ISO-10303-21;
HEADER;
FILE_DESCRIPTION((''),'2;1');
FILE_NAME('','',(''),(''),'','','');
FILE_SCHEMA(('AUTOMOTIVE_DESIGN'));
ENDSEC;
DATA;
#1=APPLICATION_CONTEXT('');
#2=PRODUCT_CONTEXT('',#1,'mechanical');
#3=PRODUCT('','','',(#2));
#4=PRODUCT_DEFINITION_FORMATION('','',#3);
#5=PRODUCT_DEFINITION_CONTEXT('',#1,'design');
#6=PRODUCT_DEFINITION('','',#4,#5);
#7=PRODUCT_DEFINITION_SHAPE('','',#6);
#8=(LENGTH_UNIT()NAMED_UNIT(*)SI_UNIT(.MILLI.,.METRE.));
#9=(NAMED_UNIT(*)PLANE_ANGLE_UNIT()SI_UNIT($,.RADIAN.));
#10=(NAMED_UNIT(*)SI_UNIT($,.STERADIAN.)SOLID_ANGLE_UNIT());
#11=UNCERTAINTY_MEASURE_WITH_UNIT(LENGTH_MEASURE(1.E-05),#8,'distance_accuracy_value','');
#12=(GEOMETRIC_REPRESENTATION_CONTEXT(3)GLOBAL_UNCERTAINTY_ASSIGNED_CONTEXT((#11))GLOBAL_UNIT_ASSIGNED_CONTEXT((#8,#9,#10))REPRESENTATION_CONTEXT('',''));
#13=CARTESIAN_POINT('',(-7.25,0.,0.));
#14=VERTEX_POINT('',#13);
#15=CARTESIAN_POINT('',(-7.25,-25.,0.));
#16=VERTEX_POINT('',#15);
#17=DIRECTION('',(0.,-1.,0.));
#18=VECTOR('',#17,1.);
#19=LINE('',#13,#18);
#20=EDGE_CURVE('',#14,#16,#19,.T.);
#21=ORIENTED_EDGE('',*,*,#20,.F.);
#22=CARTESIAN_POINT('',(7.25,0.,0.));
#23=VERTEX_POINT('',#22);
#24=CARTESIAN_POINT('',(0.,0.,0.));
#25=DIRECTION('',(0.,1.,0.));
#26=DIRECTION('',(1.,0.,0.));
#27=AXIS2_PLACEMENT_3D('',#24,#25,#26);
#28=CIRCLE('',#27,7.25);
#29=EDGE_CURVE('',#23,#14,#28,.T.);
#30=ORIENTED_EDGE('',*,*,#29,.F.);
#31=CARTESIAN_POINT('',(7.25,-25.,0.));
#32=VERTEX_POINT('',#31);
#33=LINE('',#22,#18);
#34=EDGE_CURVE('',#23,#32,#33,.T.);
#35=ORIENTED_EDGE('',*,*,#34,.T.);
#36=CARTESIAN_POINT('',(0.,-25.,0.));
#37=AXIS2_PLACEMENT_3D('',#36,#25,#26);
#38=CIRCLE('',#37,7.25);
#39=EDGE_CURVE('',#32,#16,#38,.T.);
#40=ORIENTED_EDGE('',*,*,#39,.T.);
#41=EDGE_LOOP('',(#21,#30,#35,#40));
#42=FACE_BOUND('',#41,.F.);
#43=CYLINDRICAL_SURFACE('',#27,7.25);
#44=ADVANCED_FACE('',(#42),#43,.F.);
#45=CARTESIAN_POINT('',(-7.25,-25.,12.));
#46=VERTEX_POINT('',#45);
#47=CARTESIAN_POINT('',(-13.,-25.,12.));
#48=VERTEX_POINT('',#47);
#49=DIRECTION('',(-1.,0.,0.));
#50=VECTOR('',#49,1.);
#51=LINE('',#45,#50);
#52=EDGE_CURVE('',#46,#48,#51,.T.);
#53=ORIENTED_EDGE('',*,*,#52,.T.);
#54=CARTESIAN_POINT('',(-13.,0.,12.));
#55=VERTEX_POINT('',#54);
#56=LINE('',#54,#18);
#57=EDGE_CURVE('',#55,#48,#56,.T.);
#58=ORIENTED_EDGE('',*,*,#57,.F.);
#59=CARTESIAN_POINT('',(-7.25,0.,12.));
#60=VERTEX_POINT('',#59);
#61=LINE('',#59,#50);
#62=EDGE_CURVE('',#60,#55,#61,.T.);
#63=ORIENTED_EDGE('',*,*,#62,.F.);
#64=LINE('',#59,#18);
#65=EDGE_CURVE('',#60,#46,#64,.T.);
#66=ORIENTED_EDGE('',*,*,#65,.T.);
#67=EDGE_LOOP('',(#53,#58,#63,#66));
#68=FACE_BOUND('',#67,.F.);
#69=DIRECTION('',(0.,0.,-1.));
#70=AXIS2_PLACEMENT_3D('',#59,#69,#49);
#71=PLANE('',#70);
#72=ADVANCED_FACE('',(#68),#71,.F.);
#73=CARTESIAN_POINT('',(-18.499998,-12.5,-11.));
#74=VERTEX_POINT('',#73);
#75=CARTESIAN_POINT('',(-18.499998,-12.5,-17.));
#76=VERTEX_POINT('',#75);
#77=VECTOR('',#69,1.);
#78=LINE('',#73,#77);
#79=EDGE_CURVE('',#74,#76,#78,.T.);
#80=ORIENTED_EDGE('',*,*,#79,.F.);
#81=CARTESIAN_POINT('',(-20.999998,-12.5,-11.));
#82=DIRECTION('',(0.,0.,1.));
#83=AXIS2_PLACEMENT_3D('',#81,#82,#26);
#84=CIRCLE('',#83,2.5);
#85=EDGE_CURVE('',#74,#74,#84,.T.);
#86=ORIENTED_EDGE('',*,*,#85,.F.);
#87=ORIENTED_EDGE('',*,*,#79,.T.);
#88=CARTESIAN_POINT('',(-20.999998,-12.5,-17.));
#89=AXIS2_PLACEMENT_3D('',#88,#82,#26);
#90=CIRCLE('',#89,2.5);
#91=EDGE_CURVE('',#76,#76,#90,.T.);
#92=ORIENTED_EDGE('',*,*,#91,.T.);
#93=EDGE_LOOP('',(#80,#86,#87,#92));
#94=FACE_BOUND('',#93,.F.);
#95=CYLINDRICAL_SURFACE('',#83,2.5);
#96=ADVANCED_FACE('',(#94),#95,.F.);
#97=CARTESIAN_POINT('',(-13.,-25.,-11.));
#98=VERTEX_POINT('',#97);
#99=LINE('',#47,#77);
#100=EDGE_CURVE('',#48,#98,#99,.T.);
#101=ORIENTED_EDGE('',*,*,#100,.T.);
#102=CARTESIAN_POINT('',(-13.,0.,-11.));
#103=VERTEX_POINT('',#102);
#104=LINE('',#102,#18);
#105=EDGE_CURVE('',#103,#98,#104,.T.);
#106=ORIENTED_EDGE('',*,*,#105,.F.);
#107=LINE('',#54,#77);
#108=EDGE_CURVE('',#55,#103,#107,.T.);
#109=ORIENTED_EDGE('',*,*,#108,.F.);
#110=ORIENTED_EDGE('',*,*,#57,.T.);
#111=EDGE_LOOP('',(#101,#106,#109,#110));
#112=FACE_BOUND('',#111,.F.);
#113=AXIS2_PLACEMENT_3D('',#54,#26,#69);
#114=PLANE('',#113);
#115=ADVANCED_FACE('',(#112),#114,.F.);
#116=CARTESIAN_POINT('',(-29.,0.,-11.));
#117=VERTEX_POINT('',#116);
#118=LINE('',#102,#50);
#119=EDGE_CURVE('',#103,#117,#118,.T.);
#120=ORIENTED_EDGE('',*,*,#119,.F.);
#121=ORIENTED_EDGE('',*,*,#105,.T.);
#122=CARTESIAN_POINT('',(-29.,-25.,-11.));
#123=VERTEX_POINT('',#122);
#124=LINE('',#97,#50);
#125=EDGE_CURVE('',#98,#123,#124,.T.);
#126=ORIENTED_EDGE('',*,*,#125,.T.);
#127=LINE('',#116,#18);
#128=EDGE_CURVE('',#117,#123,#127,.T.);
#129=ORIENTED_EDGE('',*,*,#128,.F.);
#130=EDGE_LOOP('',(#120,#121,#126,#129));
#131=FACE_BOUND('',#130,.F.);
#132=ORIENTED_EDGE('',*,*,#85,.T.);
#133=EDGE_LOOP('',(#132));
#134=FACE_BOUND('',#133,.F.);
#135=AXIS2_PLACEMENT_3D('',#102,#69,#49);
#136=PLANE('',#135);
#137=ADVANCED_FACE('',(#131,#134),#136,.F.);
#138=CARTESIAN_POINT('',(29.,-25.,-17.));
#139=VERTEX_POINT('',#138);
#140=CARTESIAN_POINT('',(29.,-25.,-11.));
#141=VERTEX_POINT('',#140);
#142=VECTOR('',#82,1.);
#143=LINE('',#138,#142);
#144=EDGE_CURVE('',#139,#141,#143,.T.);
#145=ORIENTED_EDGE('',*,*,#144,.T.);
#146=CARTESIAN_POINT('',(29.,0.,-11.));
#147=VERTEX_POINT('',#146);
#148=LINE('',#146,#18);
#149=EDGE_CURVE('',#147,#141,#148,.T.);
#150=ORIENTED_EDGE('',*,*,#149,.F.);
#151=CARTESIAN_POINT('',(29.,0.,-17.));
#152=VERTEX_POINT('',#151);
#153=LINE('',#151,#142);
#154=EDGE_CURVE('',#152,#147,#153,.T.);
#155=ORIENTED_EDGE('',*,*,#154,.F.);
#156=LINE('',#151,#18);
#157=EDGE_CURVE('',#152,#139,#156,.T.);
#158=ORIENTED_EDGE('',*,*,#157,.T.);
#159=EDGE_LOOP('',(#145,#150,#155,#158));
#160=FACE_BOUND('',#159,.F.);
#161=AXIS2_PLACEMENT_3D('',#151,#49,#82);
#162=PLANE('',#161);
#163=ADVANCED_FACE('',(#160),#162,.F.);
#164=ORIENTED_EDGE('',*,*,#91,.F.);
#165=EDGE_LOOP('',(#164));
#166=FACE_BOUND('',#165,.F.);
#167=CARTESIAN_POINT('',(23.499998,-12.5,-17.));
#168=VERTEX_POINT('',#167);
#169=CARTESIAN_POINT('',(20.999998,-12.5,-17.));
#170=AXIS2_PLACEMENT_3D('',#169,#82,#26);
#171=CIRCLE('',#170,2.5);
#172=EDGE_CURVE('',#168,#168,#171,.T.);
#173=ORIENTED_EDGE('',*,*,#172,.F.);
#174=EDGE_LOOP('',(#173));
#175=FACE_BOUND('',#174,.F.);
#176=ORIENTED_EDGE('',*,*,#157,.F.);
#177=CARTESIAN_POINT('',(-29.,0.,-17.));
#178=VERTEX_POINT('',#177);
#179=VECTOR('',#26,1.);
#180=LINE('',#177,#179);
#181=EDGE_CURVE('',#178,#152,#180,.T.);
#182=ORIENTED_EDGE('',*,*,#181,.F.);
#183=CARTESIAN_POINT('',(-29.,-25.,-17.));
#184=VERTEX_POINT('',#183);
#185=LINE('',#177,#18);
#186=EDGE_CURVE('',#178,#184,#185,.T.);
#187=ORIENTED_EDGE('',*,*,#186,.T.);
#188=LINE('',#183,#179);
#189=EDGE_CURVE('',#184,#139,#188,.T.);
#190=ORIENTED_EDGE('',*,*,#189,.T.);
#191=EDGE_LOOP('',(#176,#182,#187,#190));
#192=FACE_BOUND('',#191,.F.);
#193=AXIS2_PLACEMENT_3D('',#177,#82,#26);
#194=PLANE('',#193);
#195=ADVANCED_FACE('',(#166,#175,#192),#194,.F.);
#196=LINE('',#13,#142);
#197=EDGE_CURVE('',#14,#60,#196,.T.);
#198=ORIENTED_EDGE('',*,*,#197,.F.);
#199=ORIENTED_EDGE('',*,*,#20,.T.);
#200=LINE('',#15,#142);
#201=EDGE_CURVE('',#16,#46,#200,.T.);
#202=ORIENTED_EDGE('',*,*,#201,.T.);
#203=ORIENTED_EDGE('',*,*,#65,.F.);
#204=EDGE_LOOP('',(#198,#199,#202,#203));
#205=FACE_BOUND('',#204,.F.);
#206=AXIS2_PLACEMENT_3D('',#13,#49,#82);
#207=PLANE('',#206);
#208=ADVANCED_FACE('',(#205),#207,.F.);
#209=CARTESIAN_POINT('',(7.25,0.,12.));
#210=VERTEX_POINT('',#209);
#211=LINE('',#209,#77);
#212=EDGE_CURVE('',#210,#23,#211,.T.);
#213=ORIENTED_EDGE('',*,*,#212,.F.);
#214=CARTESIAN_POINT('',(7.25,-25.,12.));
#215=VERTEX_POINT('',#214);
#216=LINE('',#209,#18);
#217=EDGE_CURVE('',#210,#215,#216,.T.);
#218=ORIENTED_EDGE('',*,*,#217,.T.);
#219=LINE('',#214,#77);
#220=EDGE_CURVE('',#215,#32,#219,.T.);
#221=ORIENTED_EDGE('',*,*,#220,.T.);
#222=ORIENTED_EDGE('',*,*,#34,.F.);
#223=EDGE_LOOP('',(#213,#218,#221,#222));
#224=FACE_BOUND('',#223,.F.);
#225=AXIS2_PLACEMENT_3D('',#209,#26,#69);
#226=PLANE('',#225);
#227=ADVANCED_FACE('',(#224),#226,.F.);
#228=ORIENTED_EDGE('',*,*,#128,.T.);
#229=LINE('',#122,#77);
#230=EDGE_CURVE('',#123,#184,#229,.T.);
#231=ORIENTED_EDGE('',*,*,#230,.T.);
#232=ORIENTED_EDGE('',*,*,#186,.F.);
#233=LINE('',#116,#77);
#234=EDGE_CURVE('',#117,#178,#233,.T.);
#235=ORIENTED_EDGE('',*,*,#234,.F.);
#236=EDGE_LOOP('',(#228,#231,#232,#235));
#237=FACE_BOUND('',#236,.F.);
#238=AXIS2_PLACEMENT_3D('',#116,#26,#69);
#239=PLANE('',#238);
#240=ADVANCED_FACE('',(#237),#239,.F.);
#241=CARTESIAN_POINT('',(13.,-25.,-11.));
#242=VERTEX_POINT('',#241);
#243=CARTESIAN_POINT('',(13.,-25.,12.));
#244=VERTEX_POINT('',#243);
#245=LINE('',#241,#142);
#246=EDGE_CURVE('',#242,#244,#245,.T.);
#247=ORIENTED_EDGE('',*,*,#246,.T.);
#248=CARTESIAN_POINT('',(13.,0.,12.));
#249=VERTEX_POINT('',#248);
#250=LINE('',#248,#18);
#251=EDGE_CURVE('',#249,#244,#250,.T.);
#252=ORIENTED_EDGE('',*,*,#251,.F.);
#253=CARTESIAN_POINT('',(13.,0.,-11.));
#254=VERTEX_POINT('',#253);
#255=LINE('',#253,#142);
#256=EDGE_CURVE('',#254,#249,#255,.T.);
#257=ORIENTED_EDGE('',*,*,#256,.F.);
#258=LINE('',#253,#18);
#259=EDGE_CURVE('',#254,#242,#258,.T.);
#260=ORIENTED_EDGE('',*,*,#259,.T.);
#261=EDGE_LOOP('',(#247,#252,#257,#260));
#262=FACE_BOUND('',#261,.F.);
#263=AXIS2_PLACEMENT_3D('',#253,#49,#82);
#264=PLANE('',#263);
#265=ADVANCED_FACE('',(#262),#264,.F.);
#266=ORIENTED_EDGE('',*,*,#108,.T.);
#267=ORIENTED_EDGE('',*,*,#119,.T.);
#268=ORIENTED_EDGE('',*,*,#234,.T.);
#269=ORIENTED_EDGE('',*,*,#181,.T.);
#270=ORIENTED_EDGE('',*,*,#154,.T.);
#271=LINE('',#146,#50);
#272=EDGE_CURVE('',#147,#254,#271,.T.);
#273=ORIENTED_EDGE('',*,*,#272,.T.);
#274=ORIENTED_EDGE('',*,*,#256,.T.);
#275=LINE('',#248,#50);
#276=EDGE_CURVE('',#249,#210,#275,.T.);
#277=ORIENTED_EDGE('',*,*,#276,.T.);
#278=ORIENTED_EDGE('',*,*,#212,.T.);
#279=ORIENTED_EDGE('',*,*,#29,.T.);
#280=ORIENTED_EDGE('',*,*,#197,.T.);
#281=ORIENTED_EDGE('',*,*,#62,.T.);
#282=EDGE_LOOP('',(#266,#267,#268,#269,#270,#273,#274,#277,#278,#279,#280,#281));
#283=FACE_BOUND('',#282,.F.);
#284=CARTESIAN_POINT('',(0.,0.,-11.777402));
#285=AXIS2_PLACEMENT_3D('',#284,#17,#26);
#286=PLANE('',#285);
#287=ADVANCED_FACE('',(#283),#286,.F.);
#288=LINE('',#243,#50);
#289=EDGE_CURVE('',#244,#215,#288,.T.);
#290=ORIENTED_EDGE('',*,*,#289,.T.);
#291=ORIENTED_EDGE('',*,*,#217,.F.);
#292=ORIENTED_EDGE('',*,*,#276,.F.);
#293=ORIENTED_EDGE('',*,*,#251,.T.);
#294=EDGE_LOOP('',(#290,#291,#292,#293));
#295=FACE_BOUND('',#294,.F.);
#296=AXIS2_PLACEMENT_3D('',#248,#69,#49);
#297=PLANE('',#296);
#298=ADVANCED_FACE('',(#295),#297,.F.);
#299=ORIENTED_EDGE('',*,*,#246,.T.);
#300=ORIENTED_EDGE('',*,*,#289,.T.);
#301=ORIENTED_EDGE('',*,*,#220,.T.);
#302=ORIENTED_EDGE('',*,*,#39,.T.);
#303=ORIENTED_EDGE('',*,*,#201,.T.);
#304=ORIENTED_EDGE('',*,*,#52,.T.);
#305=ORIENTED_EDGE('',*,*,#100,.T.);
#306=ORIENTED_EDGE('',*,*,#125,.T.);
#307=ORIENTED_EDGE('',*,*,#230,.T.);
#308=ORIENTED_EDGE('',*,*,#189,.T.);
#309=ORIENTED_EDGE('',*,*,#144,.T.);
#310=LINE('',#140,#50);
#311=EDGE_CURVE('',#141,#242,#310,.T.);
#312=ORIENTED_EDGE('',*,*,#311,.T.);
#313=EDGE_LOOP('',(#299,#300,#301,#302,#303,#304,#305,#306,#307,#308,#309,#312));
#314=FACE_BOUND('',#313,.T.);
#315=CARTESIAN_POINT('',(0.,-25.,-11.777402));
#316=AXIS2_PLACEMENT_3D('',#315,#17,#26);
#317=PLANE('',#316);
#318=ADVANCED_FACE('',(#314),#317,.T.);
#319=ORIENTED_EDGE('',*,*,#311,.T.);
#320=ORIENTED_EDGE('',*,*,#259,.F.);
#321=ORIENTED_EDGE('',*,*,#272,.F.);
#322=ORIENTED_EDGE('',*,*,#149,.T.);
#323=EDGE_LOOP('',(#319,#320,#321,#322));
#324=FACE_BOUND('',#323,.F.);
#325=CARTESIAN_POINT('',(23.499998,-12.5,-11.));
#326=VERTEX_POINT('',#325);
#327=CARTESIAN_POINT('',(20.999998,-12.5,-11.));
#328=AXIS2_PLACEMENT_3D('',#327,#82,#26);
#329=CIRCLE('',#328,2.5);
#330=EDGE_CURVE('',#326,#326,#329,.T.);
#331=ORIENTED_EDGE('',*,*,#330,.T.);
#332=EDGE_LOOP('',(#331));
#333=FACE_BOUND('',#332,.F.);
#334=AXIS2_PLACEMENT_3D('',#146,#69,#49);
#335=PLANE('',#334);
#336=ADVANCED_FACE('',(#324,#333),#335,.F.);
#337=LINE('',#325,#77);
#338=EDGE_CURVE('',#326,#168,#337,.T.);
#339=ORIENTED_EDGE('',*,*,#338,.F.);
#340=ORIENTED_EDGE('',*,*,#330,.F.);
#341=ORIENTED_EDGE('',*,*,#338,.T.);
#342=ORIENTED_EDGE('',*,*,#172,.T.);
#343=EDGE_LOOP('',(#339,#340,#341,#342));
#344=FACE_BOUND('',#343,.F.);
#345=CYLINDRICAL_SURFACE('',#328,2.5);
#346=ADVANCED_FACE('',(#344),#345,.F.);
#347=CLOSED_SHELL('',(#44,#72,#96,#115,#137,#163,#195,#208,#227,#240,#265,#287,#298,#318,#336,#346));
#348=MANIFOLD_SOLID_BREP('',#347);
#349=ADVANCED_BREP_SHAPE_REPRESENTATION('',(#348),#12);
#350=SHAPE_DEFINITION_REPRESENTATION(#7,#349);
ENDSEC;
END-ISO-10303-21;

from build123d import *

# Parameters (mm, degrees)
F1_DEPTH = 25
F2_R     = 2.5
F3_DEPTH = 6.001


# Not quite as in the source:
# - a feature names something its author has since deleted; it is built from what else it names


with BuildPart() as f1:
    # F0 (on Front) → F1 (new body)
    with BuildSketch(Plane.XZ):
        with BuildLine():
            ThreePointArc((13, 0), (0, -13), (-13, 0))
            Line((-13, 0), (-13, -11))
            Line((-13, -11), (-29, -11))
            Line((-29, -11), (-29, -17))
            Line((-29, -17), (29, -17))
            Line((29, -17), (29, -11))
            Line((29, -11), (13, -11))
            Line((13, -11), (13, 0))
        make_face()
        with BuildLine():
            Line((-13, 12), (-13, 0))
            ThreePointArc((-13, 0), (0, -13), (13, 0))
            Line((13, 0), (13, 12))
            Line((13, 12), (7.25, 12))
            Line((7.25, 12), (7.25, 0))
            ThreePointArc((7.25, 0), (0, -7.25), (-7.25, 0))
            Line((-7.25, 0), (-7.25, 12))
            Line((-7.25, 12), (-13, 12))
        make_face()
    extrude(amount=F1_DEPTH)

    # F2 (on face) → F3 (cut, through all)
    with BuildSketch(Plane.XY.offset(-11)):
        with Locations((20.9999978542, -12.5)):
            Circle(F2_R)
        with Locations((-20.9999978542, -12.5)):
            Circle(F2_R)
    extrude(amount=-F3_DEPTH, mode=Mode.SUBTRACT)


solid = f1.part
